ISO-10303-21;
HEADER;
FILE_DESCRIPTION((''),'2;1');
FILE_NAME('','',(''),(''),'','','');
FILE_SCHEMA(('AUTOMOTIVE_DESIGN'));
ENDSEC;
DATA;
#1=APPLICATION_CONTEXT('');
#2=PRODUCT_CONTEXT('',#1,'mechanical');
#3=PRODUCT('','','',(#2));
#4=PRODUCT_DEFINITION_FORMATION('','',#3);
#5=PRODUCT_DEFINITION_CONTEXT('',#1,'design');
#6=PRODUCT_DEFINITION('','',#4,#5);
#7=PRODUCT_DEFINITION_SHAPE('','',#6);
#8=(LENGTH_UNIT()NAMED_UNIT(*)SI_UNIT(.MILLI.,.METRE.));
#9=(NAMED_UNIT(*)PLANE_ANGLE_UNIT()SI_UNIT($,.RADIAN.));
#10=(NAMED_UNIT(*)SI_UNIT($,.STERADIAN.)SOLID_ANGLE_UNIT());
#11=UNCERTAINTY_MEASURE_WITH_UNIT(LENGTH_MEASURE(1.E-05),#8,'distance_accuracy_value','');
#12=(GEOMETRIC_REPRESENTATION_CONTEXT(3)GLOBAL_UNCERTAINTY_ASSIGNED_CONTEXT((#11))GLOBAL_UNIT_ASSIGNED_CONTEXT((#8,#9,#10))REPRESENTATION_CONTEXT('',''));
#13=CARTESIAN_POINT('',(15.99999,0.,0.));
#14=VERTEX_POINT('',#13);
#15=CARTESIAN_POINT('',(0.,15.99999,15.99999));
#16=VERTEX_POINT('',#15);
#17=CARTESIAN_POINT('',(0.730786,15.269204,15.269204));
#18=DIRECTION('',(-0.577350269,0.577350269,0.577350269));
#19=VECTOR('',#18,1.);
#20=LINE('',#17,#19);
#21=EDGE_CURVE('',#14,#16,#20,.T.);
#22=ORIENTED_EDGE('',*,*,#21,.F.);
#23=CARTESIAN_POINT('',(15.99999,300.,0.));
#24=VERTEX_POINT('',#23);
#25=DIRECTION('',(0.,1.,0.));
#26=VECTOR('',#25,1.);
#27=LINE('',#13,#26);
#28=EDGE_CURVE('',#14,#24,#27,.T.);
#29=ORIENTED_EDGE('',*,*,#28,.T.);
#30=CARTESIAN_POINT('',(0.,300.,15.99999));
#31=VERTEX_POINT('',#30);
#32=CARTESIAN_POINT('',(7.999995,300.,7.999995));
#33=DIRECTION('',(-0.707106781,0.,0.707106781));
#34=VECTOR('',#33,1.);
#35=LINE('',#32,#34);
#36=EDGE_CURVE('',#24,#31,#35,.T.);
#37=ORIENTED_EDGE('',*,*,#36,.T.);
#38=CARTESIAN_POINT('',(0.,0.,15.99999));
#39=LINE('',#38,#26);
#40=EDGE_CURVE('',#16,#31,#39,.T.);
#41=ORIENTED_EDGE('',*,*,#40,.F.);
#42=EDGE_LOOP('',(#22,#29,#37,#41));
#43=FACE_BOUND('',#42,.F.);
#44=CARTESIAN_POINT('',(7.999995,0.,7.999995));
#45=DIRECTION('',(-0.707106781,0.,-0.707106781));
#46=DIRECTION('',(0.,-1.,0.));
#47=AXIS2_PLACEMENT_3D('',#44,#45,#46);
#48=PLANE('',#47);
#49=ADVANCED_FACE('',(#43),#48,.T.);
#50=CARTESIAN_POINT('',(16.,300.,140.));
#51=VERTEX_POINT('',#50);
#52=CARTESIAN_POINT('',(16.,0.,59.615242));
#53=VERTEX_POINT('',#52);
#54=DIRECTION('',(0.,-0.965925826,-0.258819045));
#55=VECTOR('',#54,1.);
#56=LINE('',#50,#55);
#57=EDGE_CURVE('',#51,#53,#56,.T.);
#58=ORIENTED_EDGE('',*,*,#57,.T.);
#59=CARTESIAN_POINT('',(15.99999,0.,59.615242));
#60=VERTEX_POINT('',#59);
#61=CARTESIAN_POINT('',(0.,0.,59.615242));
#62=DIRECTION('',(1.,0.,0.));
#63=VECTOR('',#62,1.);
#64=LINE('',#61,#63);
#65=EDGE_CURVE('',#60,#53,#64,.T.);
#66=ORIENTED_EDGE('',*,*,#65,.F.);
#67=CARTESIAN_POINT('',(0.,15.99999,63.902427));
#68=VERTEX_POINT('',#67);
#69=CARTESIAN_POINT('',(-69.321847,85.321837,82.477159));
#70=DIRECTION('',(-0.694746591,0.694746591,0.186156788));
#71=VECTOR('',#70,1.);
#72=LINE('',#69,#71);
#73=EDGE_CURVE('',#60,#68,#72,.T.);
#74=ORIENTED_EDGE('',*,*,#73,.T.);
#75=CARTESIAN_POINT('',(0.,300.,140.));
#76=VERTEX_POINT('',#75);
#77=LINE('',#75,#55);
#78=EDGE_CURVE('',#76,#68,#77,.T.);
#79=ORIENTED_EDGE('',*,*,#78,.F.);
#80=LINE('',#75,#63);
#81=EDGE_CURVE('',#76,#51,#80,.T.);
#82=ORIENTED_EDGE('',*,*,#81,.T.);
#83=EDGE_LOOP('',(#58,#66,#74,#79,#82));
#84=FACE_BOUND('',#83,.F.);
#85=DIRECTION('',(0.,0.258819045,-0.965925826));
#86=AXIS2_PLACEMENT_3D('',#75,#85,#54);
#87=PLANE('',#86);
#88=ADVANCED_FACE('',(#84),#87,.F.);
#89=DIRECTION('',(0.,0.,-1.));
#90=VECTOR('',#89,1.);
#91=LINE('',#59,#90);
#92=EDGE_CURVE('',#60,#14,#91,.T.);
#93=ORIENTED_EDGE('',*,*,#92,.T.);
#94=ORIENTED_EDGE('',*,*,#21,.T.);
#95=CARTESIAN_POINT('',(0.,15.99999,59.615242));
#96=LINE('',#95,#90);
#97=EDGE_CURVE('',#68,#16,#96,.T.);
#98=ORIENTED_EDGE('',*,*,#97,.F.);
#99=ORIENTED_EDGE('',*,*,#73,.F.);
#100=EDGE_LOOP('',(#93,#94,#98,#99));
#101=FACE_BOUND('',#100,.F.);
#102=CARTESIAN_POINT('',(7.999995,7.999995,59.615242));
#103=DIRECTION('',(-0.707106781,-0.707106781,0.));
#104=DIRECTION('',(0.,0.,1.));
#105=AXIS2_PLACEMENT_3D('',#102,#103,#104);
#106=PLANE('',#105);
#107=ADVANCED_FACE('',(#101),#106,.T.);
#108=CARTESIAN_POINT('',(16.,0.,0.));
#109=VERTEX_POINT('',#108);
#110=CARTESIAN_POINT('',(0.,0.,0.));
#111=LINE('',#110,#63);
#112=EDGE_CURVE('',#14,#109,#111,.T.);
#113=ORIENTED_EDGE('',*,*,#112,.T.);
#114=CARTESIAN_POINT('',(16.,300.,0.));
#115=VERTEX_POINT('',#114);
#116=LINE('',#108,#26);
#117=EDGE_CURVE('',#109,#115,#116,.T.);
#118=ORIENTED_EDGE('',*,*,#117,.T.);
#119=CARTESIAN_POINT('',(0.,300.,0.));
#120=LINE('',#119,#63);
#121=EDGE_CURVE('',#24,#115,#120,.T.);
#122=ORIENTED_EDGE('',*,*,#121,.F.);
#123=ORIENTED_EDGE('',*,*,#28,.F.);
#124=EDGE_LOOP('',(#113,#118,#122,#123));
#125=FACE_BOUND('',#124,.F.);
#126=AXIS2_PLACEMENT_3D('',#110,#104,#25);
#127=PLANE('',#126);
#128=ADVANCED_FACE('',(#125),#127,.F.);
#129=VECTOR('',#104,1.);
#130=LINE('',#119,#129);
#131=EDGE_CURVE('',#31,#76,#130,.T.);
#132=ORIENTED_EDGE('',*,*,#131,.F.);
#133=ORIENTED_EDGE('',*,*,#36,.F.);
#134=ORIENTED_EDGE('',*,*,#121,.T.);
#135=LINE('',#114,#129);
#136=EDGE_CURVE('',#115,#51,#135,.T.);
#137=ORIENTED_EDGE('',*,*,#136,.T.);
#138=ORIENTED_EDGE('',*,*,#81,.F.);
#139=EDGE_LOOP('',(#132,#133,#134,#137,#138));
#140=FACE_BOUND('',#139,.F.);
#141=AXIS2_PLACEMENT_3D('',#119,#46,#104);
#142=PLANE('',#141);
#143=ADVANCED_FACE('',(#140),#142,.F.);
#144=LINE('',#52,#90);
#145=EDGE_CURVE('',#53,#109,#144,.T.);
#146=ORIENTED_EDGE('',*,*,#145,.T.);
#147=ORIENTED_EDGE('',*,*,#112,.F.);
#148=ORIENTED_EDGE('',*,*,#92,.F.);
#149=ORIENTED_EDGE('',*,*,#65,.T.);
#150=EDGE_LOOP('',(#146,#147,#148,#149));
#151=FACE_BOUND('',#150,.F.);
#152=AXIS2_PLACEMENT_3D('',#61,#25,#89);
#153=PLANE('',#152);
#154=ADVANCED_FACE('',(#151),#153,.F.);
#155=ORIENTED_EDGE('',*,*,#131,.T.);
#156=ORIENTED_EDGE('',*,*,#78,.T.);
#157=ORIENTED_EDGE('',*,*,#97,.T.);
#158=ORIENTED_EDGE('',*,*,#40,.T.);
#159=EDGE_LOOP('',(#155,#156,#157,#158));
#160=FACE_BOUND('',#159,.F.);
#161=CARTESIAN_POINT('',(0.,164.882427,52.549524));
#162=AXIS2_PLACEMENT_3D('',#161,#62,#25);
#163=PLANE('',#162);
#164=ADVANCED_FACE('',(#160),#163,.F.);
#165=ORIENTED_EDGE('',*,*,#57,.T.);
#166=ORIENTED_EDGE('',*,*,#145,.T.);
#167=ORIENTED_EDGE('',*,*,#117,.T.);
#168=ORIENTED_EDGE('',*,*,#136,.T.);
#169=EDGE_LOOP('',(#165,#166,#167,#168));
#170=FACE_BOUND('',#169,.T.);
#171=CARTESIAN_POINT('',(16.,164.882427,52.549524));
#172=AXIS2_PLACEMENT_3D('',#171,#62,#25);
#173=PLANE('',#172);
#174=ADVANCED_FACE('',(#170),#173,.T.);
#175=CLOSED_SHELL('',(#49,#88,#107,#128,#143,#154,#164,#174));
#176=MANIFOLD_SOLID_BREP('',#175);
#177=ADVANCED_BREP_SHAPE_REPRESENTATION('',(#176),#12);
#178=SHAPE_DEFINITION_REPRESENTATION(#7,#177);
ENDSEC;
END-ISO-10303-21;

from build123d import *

# Parameters (mm, degrees)
F1_DEPTH = 16
F2_SIZE  = 15.99999


# Not quite as in the source:
# - a fillet or chamfer is up to 0.001 mm smaller than in the source, because OpenCascade refuses the exact size


with BuildPart() as f1:
    # F0 (on Right) → F1 (new body)
    with BuildSketch(Plane.YZ):
        Polygon((0, 59.6152422707), (0, 0), (300, 0), (300, 140), align=None)
    extrude(amount=F1_DEPTH)

    # F2 (size 16 in the source; OpenCascade refuses exactly that, so slightly less here)
    f2_edges = [f1.edges().sort_by_distance(p)[0] for p in [
        (0, 0, 29.807621),
        (0, 150, 0),
    ]]
    chamfer(f2_edges, length=F2_SIZE)


solid = f1.part
